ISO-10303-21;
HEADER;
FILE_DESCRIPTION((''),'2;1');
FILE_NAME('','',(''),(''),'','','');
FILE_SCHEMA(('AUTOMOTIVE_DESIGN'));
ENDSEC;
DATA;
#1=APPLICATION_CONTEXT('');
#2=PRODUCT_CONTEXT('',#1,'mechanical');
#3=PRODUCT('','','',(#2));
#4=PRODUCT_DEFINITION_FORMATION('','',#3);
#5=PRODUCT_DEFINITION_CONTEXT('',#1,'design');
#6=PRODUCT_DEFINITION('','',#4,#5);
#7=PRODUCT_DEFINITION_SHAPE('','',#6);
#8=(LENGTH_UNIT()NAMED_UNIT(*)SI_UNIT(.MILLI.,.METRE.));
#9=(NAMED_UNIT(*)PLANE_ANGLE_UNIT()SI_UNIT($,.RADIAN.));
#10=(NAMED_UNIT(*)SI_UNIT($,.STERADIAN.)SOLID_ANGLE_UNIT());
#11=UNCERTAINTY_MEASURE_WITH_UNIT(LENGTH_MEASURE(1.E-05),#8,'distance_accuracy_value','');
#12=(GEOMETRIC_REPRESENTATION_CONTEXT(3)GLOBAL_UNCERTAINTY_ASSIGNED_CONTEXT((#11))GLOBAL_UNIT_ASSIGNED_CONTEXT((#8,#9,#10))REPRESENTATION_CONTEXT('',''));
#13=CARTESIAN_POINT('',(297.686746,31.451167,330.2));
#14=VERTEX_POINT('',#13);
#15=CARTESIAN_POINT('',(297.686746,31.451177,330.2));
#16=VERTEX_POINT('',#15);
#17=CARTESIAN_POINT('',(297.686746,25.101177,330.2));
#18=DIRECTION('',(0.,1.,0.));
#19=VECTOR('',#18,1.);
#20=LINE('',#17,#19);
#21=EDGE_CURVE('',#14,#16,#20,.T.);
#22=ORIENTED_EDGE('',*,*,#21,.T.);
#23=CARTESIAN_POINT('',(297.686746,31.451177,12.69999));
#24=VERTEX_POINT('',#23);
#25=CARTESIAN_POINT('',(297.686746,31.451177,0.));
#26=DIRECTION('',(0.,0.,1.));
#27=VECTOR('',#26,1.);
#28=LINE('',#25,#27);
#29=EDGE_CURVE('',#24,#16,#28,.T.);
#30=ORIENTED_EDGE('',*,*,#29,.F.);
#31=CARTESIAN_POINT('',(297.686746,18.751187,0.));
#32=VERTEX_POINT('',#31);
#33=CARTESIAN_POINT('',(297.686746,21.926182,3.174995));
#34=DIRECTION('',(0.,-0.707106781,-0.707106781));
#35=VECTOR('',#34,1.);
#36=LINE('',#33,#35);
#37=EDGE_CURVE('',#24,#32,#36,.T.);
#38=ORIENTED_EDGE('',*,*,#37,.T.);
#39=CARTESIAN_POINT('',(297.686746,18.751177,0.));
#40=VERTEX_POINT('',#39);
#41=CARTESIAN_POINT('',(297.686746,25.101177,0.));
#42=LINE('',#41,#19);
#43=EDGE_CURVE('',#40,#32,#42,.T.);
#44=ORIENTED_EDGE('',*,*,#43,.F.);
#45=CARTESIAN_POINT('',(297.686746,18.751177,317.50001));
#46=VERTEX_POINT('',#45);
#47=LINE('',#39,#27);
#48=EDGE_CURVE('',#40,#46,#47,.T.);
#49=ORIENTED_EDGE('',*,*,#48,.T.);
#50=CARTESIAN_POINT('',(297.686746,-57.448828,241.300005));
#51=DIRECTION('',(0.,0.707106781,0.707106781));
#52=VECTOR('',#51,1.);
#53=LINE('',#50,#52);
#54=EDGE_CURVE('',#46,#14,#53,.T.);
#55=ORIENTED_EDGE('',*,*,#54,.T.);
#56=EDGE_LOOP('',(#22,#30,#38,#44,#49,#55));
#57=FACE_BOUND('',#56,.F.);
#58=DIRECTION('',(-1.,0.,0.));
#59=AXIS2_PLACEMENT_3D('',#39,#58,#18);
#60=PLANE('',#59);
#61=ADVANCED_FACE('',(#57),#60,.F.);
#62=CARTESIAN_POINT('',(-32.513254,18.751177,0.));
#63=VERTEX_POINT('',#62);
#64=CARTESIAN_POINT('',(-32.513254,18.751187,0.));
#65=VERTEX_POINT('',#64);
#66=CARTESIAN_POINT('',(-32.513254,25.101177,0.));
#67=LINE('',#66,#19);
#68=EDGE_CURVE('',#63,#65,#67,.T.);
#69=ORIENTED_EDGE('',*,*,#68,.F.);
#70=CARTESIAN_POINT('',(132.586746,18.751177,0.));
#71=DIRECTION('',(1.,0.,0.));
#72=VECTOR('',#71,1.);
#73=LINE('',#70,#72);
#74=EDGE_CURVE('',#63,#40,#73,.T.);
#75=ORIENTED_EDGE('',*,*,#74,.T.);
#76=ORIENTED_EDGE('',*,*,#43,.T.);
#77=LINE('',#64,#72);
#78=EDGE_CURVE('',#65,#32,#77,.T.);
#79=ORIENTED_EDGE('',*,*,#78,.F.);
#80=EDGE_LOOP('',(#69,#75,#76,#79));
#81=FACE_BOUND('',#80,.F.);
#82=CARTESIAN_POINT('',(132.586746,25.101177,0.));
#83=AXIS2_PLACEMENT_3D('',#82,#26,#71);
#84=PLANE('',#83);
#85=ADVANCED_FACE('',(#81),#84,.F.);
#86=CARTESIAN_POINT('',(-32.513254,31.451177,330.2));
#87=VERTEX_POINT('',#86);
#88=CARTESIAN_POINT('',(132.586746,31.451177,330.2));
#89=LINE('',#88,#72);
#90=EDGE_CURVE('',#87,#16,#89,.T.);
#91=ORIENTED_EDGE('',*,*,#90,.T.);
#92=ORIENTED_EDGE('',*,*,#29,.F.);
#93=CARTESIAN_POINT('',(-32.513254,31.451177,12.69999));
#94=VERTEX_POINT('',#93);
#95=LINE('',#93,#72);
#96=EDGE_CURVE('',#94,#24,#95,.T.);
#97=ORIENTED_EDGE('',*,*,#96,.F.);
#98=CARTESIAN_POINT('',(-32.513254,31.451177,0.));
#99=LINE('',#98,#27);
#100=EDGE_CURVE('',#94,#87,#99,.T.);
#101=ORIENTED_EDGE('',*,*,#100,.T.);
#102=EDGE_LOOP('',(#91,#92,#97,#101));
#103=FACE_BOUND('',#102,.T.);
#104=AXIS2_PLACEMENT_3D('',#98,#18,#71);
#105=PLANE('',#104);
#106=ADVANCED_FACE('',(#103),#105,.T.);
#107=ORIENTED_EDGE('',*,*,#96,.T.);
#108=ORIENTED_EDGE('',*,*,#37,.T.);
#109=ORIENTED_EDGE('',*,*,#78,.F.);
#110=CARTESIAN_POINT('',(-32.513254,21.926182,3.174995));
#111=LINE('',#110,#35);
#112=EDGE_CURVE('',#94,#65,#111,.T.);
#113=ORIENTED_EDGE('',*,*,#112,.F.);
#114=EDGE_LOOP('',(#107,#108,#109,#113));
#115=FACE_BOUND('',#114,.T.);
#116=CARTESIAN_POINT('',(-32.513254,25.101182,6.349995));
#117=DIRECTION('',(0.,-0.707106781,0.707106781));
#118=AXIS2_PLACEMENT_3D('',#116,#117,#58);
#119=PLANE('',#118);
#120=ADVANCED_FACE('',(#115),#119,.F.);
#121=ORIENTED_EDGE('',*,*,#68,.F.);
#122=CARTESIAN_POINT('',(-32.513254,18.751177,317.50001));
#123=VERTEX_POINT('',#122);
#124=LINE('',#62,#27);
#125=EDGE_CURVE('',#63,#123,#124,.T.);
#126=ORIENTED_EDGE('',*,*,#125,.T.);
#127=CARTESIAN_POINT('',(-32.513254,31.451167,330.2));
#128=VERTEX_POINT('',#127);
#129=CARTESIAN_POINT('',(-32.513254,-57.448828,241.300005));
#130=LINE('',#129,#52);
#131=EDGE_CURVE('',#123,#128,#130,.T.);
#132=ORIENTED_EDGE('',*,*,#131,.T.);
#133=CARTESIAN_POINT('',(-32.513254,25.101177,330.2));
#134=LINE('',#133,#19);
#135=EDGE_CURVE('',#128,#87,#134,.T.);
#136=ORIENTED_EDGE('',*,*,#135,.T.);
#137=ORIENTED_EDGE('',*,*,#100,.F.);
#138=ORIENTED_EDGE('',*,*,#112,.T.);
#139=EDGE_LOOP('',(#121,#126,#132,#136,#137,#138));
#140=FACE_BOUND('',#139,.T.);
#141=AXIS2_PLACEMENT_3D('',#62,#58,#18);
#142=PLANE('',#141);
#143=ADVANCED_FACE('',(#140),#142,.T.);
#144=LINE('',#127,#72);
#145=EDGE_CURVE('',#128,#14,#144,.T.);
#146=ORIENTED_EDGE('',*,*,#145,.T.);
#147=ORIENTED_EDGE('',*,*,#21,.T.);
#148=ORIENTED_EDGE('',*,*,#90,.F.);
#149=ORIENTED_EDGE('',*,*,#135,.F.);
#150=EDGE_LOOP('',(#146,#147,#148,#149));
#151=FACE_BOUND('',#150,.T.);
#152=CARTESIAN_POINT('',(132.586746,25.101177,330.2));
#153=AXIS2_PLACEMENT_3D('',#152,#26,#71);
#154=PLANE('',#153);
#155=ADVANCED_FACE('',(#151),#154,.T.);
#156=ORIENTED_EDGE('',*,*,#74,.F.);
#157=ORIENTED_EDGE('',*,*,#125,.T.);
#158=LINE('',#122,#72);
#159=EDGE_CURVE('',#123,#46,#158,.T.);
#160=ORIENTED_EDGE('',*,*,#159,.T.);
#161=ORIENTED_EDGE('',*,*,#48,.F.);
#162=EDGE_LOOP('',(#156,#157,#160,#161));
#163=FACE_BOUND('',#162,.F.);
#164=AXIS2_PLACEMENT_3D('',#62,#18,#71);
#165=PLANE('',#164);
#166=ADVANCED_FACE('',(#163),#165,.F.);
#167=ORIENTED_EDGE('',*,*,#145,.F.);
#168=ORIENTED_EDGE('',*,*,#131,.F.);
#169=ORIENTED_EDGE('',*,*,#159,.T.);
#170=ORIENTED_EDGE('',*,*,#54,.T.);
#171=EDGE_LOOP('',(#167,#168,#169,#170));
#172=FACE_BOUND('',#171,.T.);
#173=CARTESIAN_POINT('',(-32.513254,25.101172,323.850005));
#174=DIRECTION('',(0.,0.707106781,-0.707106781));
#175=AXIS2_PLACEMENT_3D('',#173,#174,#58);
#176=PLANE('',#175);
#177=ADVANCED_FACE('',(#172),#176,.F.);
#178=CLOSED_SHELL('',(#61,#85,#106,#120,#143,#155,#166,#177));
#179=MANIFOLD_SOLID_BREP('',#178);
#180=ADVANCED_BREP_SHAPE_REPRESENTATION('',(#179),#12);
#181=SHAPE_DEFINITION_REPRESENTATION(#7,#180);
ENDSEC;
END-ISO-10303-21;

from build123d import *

# Parameters (mm, degrees)
F0_W     = 330.2
F0_H     = 12.7
F1_DEPTH = 330.2
F2_SIZE  = 12.69999


# Not quite as in the source:
# - a fillet or chamfer is up to 0.001 mm smaller than in the source, because OpenCascade refuses the exact size
# - a feature names something its author has since deleted; it is built from what else it names


with BuildPart() as f1:
    # F0 (on Top) → F1 (new body)
    with BuildSketch(Plane.XY):
        with Locations((132.5867457749, 25.1011773944)):
            Rectangle(F0_W, F0_H)
    extrude(amount=F1_DEPTH)

    # F2 (size 12.7 in the source; OpenCascade refuses exactly that, so slightly less here)
    f2_edges = [f1.edges().sort_by_distance(p)[0] for p in [
        (132.586746, 31.451177, 0),
        (132.586746, 18.751177, 330.2),
    ]]
    chamfer(f2_edges, length=F2_SIZE)


solid = f1.part
